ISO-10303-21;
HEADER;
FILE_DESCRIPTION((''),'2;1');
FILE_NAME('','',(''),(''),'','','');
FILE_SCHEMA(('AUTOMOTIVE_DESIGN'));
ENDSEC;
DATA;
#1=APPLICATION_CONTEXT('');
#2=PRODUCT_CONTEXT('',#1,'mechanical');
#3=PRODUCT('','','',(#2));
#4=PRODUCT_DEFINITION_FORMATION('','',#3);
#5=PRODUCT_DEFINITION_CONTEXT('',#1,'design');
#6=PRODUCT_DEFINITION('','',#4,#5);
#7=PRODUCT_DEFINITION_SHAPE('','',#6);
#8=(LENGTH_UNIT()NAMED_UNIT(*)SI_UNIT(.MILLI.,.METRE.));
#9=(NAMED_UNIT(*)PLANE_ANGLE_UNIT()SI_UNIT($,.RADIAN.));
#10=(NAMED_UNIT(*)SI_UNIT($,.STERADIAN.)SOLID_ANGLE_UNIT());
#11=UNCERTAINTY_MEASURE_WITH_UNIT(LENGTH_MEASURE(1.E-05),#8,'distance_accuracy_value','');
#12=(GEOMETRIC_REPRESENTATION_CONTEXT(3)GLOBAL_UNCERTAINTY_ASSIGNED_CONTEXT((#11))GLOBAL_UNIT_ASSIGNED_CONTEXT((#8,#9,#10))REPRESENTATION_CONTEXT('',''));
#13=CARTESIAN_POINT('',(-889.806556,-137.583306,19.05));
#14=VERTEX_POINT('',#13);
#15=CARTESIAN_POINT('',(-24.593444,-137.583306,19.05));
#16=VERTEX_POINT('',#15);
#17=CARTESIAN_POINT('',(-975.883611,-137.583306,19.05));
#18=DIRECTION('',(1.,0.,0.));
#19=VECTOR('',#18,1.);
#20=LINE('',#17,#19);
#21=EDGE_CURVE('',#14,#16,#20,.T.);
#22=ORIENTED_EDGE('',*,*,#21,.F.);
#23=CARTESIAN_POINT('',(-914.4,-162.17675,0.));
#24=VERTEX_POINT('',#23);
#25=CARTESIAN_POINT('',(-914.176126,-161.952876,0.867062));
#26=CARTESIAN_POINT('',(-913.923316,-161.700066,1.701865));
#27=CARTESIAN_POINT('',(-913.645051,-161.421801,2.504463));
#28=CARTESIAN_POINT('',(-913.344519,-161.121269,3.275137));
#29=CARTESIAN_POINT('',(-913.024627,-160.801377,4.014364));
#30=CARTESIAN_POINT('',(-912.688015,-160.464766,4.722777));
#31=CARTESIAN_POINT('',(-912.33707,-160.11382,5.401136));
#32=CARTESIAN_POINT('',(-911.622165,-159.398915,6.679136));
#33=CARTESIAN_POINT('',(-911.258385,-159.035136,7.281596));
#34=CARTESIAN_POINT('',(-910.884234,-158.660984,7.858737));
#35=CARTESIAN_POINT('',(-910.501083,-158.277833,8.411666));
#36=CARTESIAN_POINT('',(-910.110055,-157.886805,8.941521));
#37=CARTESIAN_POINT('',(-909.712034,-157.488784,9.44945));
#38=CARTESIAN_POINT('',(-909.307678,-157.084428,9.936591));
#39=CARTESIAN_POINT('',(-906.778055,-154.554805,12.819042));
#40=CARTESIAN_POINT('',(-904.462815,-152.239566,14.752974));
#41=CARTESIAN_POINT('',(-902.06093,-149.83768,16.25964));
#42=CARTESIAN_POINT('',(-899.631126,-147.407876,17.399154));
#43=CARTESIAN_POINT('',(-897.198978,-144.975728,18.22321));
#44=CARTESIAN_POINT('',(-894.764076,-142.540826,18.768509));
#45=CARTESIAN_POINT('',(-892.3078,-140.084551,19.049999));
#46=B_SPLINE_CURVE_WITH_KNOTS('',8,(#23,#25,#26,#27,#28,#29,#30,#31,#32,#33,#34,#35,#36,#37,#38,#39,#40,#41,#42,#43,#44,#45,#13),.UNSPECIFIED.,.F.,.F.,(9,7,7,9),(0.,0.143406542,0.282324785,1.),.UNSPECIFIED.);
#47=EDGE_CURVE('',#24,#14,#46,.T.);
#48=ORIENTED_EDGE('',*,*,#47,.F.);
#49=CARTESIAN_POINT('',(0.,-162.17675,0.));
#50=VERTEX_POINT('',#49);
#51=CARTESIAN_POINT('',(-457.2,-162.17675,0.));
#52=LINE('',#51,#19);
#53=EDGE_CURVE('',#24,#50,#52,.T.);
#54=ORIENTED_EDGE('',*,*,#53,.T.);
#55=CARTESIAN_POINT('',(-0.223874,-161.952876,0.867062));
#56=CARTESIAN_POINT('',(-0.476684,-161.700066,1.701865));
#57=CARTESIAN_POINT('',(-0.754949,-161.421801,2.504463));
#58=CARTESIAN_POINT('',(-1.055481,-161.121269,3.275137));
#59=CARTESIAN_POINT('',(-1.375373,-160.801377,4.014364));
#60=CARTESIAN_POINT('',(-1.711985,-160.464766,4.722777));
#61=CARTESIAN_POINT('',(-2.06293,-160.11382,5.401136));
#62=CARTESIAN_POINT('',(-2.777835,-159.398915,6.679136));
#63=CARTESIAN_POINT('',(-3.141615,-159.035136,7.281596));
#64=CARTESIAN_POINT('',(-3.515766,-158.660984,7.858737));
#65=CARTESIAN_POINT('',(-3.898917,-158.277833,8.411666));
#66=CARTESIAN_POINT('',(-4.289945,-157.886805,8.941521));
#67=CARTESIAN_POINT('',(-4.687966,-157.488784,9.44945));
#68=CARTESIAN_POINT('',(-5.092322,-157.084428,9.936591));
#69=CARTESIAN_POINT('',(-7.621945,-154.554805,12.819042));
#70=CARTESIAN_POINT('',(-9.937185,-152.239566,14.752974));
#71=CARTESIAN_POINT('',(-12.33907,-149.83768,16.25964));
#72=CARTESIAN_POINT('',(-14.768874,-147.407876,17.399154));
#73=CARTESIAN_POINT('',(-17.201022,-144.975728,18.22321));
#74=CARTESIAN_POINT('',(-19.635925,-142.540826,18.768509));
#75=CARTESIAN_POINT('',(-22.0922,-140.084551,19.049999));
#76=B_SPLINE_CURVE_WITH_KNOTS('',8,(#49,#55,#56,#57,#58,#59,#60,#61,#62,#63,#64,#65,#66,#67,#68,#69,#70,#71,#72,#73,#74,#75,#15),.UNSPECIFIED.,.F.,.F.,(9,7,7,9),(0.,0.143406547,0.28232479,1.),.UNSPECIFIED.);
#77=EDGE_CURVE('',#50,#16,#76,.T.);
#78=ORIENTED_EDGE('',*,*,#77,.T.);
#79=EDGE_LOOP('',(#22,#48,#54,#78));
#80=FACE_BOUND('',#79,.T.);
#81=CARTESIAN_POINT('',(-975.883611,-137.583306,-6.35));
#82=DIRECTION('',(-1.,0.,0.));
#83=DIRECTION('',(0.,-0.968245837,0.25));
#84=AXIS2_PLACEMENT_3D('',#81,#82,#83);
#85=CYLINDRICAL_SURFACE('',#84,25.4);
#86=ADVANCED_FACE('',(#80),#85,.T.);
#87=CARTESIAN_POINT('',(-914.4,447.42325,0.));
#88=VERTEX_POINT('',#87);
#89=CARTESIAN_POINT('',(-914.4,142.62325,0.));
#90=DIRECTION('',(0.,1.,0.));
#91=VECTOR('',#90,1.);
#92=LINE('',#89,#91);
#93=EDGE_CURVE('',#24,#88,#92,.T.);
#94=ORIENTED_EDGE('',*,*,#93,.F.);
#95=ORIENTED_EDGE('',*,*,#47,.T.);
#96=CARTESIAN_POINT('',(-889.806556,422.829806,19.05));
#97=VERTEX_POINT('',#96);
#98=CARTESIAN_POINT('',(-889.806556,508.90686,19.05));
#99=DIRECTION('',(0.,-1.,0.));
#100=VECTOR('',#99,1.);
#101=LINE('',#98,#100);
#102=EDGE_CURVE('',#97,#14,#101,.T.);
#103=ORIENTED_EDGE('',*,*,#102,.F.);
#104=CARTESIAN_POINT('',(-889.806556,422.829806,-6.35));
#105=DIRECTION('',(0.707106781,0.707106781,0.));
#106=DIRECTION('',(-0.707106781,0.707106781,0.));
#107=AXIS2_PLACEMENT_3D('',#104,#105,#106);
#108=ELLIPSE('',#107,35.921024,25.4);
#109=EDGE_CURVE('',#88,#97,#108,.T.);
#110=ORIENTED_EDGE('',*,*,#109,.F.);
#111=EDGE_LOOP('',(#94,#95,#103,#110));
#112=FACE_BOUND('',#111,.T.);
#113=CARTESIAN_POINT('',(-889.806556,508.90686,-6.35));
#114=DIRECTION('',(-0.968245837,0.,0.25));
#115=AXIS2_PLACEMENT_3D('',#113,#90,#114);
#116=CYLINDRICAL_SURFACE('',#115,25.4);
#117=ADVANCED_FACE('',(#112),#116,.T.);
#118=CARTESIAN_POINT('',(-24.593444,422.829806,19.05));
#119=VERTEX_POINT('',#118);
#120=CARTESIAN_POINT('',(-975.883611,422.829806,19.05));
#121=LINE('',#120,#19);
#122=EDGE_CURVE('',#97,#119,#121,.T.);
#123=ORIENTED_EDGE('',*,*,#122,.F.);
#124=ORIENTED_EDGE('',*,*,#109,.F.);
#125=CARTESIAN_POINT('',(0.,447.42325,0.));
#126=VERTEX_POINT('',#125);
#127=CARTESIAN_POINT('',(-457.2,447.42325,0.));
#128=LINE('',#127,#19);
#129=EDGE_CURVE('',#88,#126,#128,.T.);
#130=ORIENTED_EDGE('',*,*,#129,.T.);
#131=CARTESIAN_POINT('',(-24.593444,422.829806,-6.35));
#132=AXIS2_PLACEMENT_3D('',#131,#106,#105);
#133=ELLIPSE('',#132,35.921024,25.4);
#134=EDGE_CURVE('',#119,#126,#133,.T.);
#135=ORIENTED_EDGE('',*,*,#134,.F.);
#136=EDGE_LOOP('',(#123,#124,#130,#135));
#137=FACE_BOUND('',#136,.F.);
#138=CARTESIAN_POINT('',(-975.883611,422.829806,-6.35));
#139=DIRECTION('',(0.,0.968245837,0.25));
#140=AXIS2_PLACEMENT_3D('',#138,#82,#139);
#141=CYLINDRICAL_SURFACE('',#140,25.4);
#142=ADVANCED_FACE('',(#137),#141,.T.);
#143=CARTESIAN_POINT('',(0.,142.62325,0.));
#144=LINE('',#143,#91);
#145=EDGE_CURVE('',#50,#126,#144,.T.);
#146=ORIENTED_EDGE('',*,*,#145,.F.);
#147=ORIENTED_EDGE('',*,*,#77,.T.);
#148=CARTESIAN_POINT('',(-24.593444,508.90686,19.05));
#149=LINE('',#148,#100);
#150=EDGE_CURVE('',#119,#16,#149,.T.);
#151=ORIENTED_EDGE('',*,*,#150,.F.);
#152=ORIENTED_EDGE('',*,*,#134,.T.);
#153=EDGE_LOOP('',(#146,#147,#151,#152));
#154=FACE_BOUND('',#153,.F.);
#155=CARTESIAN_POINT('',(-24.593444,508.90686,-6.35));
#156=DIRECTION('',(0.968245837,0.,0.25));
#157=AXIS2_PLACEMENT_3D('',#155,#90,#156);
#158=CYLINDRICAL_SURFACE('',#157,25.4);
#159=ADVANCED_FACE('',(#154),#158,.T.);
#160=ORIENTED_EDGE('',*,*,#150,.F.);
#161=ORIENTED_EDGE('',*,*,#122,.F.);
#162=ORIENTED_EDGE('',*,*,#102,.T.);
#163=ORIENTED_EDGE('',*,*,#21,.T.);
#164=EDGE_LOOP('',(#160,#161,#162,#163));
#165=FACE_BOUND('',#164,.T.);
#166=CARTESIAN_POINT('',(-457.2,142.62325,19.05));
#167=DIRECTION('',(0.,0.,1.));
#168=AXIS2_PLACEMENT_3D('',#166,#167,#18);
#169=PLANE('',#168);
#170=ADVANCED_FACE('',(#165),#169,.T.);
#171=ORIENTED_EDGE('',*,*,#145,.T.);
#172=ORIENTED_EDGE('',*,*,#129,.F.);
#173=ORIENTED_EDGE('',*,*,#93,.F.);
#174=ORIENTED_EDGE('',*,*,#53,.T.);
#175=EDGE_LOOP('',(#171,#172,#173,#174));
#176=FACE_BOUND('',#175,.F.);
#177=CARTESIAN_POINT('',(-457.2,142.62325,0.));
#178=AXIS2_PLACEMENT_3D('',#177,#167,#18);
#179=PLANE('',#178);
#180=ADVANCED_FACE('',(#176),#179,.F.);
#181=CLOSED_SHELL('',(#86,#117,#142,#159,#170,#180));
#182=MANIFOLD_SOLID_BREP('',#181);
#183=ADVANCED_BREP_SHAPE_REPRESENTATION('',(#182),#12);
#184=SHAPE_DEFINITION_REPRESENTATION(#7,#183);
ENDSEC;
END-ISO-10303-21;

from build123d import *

# Parameters (mm, degrees)
F0_W        = 914.4
F0_H        = 609.6
F1_DEPTH    = 19.05
F2_T1_DEPTH = 732.5672212421
F2_T3_DEPTH = 1037.3672212421


# Not quite as in the source:
# - a fillet or chamfer that OpenCascade refuses, or shapes differently, is made with other operations: its cross-section is extruded or revolved along the edge and cut away or added


with BuildPart() as f1:
    # F0 (on Top) → F1 (new body)
    with BuildSketch(Plane.XY):
        with Locations((-457.2, 142.6232497496)):
            Rectangle(F0_W, F0_H)
    extrude(amount=F1_DEPTH)

    # F2: fillet of radius 25.4 on 4 edges, made by hand

    # F2_s2 → F2_t1 (cut)
    with BuildSketch(Plane.XZ.offset(-508.9068603707)):
        with BuildLine():
            ThreePointArc((0, 0), (-9.0391843817, 13.7304631421), (-24.5934442484, 19.05))
            Line((-24.5934442484, 19.05), (0, 19.05))
            Line((0, 19.05), (0, 0))
        make_face()
        with BuildLine():
            ThreePointArc((-914.4, 0), (-905.3608156183, 13.7304631421), (-889.8065557516, 19.05))
            Line((-889.8065557516, 19.05), (-914.4, 19.05))
            Line((-914.4, 19.05), (-914.4, 0))
        make_face()
    extrude(amount=F2_T1_DEPTH, mode=Mode.SUBTRACT)

    # F2_s4 → F2_t3 (cut)
    with BuildSketch(Plane.YZ.offset(-975.883610621)):
        with BuildLine():
            ThreePointArc((-162.1767502504, 0), (-153.1375658686, 13.7304631421), (-137.583306002, 19.05))
            Line((-137.583306002, 19.05), (-162.1767502504, 19.05))
            Line((-162.1767502504, 19.05), (-162.1767502504, 0))
        make_face()
        with BuildLine():
            ThreePointArc((447.4232497496, 0), (438.3840653679, 13.7304631421), (422.8298055012, 19.05))
            Line((422.8298055012, 19.05), (447.4232497496, 19.05))
            Line((447.4232497496, 19.05), (447.4232497496, 0))
        make_face()
    extrude(amount=F2_T3_DEPTH, mode=Mode.SUBTRACT)


solid = f1.part
